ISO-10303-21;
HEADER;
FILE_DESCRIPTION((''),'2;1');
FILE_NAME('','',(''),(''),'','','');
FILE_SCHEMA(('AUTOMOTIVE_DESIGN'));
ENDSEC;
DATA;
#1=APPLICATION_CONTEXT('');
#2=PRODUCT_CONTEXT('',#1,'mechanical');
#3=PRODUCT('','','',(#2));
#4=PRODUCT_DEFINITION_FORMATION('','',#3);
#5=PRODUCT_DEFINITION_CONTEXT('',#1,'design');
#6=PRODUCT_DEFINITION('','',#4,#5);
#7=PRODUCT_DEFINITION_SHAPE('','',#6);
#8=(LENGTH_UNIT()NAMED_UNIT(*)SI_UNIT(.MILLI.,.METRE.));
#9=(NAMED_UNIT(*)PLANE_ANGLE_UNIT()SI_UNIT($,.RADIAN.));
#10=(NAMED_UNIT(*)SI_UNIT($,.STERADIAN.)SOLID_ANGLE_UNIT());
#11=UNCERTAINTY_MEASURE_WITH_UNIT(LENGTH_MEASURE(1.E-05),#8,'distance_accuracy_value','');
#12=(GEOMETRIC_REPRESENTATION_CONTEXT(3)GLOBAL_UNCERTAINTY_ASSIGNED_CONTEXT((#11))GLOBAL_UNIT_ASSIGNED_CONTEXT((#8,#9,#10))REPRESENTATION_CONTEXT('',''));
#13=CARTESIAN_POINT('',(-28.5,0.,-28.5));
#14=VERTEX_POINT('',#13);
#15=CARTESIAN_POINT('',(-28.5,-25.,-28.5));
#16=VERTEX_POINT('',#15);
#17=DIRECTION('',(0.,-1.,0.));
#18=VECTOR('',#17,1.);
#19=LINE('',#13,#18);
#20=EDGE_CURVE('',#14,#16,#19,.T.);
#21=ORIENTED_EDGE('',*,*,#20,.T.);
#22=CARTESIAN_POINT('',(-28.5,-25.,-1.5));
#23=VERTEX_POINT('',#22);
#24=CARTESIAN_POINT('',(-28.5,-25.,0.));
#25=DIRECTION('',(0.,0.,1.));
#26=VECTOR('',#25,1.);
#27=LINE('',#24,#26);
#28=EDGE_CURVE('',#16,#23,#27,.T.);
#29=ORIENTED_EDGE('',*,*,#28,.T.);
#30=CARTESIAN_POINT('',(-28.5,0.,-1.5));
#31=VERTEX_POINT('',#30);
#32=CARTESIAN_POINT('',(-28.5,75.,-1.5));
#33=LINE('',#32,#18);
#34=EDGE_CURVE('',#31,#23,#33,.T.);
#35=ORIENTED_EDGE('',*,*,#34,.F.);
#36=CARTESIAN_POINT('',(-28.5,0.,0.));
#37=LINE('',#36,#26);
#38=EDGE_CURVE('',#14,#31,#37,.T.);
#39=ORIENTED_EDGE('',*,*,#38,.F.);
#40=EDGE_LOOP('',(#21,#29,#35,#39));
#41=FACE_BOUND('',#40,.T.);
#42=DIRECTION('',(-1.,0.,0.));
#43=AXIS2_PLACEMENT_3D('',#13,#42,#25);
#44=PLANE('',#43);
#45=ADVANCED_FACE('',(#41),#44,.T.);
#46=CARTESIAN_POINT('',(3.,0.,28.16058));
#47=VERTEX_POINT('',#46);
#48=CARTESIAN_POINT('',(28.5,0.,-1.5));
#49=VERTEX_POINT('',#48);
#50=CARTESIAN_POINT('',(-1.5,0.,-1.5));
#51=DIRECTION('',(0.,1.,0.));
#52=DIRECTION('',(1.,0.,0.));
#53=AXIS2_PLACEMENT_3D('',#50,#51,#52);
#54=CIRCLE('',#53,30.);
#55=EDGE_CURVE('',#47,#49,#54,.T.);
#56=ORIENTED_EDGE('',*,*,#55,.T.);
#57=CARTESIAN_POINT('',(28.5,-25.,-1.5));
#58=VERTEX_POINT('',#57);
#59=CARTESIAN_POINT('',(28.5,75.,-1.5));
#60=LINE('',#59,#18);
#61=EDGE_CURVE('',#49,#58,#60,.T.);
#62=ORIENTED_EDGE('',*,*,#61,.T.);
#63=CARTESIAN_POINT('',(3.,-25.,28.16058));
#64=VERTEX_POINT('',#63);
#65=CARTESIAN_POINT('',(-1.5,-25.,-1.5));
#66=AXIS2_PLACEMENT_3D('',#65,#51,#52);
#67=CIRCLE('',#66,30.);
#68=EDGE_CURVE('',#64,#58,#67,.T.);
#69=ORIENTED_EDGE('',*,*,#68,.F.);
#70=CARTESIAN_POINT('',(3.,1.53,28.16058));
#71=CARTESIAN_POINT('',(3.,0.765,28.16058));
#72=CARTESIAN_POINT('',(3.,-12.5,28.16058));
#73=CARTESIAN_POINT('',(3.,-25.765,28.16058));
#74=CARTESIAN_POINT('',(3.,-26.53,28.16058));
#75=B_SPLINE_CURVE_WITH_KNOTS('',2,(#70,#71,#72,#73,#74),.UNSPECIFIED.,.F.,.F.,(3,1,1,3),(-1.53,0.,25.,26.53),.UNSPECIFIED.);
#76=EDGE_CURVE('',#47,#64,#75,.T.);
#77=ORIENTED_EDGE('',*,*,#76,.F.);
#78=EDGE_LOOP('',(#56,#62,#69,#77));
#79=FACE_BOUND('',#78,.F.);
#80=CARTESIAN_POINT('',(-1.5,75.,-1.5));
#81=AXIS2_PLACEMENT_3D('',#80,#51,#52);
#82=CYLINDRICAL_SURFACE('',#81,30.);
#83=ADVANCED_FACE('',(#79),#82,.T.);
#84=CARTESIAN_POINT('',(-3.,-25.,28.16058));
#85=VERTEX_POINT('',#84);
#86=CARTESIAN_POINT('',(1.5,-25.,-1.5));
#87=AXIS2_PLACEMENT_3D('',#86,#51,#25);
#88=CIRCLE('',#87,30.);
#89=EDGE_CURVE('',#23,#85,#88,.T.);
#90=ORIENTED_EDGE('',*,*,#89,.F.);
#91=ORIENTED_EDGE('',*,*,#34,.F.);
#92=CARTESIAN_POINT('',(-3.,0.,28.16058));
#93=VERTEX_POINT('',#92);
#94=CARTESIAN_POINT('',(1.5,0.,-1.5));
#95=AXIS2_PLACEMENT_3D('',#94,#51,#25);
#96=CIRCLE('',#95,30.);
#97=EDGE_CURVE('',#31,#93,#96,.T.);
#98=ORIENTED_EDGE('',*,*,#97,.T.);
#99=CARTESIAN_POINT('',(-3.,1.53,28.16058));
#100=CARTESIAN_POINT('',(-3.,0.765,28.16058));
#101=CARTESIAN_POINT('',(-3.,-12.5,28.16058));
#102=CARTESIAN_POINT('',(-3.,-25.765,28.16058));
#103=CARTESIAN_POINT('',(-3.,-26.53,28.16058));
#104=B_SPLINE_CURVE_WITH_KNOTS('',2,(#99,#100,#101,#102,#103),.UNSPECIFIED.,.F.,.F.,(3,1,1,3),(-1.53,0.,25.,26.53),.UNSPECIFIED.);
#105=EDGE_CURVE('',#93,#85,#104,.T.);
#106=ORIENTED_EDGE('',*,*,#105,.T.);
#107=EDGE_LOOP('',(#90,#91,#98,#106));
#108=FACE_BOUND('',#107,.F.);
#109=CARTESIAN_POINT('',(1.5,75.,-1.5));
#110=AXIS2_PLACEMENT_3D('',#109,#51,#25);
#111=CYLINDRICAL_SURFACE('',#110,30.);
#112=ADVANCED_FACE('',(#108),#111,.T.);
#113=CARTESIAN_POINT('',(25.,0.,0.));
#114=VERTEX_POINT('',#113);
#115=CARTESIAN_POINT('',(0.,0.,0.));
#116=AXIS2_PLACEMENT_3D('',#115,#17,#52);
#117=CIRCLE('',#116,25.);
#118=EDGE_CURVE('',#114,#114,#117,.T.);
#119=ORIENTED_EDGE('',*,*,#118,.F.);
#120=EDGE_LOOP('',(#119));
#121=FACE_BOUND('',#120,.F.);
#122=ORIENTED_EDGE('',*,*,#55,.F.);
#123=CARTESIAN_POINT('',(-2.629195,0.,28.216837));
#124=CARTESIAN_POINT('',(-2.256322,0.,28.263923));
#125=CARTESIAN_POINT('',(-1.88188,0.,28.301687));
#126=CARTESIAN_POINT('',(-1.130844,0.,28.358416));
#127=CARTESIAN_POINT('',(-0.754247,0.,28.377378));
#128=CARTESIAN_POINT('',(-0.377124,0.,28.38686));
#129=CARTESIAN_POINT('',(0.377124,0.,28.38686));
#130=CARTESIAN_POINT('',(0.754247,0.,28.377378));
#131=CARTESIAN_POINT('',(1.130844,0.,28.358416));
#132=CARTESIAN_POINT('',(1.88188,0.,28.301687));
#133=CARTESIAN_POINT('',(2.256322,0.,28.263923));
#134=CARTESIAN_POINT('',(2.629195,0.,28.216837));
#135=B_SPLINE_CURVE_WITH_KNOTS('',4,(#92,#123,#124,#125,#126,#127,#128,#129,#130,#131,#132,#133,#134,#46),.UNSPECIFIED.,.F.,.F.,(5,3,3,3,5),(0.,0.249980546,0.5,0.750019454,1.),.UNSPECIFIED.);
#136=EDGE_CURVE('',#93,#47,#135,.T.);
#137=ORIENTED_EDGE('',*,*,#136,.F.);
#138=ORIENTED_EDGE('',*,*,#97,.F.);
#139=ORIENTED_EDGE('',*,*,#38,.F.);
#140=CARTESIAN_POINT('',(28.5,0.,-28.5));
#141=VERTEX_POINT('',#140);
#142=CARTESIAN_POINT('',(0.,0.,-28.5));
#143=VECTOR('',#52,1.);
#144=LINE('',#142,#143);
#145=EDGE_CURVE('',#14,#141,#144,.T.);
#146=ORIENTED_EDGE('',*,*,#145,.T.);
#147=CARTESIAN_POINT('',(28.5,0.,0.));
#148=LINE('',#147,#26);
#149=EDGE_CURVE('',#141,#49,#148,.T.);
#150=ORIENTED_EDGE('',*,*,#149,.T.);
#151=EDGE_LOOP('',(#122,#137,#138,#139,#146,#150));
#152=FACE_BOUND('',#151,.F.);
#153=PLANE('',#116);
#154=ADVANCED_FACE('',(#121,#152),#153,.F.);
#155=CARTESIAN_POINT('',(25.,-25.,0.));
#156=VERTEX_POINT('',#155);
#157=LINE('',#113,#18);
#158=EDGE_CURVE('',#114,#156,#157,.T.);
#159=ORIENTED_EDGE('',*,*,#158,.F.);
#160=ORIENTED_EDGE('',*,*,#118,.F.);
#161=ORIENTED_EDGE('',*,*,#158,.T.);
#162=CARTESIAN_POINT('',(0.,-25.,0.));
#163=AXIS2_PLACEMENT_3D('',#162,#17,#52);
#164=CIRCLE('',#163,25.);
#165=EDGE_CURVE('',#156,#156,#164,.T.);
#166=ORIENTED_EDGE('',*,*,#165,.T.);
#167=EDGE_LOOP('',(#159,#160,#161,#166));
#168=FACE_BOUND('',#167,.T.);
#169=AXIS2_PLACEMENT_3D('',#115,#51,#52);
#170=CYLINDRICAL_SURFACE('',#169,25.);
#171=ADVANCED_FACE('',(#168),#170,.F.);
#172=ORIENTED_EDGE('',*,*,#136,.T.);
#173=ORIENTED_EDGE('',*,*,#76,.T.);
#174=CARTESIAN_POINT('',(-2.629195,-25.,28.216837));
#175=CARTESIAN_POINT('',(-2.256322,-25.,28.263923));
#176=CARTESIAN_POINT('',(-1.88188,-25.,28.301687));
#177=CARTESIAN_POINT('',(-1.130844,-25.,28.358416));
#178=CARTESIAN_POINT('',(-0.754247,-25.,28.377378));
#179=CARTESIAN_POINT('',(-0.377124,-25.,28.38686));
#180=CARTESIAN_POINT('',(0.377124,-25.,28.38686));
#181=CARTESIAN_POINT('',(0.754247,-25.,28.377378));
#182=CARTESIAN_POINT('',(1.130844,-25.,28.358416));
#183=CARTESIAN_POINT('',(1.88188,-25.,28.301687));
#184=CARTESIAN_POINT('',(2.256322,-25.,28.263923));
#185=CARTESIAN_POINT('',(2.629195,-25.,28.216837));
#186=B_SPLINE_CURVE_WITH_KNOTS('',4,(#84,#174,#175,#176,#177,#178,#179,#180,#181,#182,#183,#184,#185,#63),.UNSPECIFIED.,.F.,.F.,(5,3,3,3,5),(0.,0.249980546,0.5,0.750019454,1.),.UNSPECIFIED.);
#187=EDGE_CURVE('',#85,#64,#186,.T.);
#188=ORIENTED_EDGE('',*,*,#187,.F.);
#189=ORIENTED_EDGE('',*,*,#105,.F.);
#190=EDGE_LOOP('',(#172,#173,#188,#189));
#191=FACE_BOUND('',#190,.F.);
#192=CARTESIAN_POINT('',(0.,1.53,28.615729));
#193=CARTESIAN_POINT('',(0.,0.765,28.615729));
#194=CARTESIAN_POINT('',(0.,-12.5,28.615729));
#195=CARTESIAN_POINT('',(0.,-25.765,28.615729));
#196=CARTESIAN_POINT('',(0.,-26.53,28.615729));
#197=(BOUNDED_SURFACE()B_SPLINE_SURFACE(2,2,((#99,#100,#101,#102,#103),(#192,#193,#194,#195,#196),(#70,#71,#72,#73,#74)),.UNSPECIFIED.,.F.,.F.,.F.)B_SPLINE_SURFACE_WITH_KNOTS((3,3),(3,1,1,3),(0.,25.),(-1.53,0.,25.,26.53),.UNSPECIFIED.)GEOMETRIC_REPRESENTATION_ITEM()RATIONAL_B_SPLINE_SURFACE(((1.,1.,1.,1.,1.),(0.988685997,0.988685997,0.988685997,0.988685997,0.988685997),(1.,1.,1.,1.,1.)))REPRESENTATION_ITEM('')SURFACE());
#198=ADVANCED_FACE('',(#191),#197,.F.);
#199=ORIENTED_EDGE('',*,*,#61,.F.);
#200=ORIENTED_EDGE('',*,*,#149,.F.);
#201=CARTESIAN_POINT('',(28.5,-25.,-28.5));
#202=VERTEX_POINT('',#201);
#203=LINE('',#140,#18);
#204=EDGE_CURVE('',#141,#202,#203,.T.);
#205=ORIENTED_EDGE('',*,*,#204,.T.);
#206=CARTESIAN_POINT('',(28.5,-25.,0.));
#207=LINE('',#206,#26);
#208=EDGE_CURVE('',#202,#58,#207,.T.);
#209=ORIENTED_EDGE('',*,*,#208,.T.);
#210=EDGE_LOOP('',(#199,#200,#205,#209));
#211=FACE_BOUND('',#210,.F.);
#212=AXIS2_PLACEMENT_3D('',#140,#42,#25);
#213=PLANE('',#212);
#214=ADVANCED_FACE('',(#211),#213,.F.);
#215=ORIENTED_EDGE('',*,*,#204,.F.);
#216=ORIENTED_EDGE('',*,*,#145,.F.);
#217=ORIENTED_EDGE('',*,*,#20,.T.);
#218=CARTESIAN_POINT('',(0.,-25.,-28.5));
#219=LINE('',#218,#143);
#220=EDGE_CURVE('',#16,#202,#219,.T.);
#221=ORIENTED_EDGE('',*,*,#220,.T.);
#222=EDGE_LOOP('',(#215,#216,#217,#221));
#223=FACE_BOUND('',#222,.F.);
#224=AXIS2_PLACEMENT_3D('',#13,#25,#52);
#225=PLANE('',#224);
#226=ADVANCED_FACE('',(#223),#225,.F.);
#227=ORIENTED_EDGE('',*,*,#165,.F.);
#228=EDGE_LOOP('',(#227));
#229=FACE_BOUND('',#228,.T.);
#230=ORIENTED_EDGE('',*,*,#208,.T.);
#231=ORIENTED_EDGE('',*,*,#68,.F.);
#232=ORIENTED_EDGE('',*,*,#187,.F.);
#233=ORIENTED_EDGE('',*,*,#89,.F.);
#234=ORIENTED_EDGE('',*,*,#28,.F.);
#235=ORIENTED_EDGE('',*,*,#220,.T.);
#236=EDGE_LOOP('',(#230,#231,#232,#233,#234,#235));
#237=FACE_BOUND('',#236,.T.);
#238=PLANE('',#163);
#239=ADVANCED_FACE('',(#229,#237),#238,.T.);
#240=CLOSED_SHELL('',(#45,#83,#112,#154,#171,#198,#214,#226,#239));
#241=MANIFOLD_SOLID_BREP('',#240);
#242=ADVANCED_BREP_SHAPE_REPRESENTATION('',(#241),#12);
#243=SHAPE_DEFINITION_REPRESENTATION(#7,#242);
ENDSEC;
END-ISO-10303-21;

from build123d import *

# Parameters (mm, degrees)
F0_W        = 57
F0_H        = 57
F0_R        = 25
F1_DEPTH    = 25
F2_T1_DEPTH = 175
F3_R        = 20


# Not quite as in the source:
# - a fillet or chamfer that OpenCascade refuses, or shapes differently, is made with other operations: its cross-section is extruded or revolved along the edge and cut away or added


with BuildPart() as f1:
    # F0 (on Front) → F1 (new body)
    with BuildSketch(Plane.XZ):
        Rectangle(F0_W, F0_H)
        Circle(F0_R, mode=Mode.SUBTRACT)
    extrude(amount=F1_DEPTH)

    # F2: fillet of radius 30 on 2 edges, made by hand

    # F2_s2 → F2_t1 (cut)
    with BuildSketch(Plane.XZ.offset(-75)):
        with BuildLine():
            ThreePointArc((28.5, -1.5), (19.7132034356, 19.7132034356), (-1.5, 28.5))
            Line((-1.5, 28.5), (28.5, 28.5))
            Line((28.5, 28.5), (28.5, -1.5))
        make_face()
        with BuildLine():
            ThreePointArc((1.5, 28.5), (-19.7132034356, 19.7132034356), (-28.5, -1.5))
            Line((-28.5, -1.5), (-28.5, 28.5))
            Line((-28.5, 28.5), (1.5, 28.5))
        make_face()
    extrude(amount=F2_T1_DEPTH, mode=Mode.SUBTRACT)

    # F3
    f3_edges = [f1.edges().sort_by_distance(p)[0] for p in [
        (0, -12.5, 28.462477),
    ]]
    fillet(f3_edges, radius=F3_R)


solid = f1.part
